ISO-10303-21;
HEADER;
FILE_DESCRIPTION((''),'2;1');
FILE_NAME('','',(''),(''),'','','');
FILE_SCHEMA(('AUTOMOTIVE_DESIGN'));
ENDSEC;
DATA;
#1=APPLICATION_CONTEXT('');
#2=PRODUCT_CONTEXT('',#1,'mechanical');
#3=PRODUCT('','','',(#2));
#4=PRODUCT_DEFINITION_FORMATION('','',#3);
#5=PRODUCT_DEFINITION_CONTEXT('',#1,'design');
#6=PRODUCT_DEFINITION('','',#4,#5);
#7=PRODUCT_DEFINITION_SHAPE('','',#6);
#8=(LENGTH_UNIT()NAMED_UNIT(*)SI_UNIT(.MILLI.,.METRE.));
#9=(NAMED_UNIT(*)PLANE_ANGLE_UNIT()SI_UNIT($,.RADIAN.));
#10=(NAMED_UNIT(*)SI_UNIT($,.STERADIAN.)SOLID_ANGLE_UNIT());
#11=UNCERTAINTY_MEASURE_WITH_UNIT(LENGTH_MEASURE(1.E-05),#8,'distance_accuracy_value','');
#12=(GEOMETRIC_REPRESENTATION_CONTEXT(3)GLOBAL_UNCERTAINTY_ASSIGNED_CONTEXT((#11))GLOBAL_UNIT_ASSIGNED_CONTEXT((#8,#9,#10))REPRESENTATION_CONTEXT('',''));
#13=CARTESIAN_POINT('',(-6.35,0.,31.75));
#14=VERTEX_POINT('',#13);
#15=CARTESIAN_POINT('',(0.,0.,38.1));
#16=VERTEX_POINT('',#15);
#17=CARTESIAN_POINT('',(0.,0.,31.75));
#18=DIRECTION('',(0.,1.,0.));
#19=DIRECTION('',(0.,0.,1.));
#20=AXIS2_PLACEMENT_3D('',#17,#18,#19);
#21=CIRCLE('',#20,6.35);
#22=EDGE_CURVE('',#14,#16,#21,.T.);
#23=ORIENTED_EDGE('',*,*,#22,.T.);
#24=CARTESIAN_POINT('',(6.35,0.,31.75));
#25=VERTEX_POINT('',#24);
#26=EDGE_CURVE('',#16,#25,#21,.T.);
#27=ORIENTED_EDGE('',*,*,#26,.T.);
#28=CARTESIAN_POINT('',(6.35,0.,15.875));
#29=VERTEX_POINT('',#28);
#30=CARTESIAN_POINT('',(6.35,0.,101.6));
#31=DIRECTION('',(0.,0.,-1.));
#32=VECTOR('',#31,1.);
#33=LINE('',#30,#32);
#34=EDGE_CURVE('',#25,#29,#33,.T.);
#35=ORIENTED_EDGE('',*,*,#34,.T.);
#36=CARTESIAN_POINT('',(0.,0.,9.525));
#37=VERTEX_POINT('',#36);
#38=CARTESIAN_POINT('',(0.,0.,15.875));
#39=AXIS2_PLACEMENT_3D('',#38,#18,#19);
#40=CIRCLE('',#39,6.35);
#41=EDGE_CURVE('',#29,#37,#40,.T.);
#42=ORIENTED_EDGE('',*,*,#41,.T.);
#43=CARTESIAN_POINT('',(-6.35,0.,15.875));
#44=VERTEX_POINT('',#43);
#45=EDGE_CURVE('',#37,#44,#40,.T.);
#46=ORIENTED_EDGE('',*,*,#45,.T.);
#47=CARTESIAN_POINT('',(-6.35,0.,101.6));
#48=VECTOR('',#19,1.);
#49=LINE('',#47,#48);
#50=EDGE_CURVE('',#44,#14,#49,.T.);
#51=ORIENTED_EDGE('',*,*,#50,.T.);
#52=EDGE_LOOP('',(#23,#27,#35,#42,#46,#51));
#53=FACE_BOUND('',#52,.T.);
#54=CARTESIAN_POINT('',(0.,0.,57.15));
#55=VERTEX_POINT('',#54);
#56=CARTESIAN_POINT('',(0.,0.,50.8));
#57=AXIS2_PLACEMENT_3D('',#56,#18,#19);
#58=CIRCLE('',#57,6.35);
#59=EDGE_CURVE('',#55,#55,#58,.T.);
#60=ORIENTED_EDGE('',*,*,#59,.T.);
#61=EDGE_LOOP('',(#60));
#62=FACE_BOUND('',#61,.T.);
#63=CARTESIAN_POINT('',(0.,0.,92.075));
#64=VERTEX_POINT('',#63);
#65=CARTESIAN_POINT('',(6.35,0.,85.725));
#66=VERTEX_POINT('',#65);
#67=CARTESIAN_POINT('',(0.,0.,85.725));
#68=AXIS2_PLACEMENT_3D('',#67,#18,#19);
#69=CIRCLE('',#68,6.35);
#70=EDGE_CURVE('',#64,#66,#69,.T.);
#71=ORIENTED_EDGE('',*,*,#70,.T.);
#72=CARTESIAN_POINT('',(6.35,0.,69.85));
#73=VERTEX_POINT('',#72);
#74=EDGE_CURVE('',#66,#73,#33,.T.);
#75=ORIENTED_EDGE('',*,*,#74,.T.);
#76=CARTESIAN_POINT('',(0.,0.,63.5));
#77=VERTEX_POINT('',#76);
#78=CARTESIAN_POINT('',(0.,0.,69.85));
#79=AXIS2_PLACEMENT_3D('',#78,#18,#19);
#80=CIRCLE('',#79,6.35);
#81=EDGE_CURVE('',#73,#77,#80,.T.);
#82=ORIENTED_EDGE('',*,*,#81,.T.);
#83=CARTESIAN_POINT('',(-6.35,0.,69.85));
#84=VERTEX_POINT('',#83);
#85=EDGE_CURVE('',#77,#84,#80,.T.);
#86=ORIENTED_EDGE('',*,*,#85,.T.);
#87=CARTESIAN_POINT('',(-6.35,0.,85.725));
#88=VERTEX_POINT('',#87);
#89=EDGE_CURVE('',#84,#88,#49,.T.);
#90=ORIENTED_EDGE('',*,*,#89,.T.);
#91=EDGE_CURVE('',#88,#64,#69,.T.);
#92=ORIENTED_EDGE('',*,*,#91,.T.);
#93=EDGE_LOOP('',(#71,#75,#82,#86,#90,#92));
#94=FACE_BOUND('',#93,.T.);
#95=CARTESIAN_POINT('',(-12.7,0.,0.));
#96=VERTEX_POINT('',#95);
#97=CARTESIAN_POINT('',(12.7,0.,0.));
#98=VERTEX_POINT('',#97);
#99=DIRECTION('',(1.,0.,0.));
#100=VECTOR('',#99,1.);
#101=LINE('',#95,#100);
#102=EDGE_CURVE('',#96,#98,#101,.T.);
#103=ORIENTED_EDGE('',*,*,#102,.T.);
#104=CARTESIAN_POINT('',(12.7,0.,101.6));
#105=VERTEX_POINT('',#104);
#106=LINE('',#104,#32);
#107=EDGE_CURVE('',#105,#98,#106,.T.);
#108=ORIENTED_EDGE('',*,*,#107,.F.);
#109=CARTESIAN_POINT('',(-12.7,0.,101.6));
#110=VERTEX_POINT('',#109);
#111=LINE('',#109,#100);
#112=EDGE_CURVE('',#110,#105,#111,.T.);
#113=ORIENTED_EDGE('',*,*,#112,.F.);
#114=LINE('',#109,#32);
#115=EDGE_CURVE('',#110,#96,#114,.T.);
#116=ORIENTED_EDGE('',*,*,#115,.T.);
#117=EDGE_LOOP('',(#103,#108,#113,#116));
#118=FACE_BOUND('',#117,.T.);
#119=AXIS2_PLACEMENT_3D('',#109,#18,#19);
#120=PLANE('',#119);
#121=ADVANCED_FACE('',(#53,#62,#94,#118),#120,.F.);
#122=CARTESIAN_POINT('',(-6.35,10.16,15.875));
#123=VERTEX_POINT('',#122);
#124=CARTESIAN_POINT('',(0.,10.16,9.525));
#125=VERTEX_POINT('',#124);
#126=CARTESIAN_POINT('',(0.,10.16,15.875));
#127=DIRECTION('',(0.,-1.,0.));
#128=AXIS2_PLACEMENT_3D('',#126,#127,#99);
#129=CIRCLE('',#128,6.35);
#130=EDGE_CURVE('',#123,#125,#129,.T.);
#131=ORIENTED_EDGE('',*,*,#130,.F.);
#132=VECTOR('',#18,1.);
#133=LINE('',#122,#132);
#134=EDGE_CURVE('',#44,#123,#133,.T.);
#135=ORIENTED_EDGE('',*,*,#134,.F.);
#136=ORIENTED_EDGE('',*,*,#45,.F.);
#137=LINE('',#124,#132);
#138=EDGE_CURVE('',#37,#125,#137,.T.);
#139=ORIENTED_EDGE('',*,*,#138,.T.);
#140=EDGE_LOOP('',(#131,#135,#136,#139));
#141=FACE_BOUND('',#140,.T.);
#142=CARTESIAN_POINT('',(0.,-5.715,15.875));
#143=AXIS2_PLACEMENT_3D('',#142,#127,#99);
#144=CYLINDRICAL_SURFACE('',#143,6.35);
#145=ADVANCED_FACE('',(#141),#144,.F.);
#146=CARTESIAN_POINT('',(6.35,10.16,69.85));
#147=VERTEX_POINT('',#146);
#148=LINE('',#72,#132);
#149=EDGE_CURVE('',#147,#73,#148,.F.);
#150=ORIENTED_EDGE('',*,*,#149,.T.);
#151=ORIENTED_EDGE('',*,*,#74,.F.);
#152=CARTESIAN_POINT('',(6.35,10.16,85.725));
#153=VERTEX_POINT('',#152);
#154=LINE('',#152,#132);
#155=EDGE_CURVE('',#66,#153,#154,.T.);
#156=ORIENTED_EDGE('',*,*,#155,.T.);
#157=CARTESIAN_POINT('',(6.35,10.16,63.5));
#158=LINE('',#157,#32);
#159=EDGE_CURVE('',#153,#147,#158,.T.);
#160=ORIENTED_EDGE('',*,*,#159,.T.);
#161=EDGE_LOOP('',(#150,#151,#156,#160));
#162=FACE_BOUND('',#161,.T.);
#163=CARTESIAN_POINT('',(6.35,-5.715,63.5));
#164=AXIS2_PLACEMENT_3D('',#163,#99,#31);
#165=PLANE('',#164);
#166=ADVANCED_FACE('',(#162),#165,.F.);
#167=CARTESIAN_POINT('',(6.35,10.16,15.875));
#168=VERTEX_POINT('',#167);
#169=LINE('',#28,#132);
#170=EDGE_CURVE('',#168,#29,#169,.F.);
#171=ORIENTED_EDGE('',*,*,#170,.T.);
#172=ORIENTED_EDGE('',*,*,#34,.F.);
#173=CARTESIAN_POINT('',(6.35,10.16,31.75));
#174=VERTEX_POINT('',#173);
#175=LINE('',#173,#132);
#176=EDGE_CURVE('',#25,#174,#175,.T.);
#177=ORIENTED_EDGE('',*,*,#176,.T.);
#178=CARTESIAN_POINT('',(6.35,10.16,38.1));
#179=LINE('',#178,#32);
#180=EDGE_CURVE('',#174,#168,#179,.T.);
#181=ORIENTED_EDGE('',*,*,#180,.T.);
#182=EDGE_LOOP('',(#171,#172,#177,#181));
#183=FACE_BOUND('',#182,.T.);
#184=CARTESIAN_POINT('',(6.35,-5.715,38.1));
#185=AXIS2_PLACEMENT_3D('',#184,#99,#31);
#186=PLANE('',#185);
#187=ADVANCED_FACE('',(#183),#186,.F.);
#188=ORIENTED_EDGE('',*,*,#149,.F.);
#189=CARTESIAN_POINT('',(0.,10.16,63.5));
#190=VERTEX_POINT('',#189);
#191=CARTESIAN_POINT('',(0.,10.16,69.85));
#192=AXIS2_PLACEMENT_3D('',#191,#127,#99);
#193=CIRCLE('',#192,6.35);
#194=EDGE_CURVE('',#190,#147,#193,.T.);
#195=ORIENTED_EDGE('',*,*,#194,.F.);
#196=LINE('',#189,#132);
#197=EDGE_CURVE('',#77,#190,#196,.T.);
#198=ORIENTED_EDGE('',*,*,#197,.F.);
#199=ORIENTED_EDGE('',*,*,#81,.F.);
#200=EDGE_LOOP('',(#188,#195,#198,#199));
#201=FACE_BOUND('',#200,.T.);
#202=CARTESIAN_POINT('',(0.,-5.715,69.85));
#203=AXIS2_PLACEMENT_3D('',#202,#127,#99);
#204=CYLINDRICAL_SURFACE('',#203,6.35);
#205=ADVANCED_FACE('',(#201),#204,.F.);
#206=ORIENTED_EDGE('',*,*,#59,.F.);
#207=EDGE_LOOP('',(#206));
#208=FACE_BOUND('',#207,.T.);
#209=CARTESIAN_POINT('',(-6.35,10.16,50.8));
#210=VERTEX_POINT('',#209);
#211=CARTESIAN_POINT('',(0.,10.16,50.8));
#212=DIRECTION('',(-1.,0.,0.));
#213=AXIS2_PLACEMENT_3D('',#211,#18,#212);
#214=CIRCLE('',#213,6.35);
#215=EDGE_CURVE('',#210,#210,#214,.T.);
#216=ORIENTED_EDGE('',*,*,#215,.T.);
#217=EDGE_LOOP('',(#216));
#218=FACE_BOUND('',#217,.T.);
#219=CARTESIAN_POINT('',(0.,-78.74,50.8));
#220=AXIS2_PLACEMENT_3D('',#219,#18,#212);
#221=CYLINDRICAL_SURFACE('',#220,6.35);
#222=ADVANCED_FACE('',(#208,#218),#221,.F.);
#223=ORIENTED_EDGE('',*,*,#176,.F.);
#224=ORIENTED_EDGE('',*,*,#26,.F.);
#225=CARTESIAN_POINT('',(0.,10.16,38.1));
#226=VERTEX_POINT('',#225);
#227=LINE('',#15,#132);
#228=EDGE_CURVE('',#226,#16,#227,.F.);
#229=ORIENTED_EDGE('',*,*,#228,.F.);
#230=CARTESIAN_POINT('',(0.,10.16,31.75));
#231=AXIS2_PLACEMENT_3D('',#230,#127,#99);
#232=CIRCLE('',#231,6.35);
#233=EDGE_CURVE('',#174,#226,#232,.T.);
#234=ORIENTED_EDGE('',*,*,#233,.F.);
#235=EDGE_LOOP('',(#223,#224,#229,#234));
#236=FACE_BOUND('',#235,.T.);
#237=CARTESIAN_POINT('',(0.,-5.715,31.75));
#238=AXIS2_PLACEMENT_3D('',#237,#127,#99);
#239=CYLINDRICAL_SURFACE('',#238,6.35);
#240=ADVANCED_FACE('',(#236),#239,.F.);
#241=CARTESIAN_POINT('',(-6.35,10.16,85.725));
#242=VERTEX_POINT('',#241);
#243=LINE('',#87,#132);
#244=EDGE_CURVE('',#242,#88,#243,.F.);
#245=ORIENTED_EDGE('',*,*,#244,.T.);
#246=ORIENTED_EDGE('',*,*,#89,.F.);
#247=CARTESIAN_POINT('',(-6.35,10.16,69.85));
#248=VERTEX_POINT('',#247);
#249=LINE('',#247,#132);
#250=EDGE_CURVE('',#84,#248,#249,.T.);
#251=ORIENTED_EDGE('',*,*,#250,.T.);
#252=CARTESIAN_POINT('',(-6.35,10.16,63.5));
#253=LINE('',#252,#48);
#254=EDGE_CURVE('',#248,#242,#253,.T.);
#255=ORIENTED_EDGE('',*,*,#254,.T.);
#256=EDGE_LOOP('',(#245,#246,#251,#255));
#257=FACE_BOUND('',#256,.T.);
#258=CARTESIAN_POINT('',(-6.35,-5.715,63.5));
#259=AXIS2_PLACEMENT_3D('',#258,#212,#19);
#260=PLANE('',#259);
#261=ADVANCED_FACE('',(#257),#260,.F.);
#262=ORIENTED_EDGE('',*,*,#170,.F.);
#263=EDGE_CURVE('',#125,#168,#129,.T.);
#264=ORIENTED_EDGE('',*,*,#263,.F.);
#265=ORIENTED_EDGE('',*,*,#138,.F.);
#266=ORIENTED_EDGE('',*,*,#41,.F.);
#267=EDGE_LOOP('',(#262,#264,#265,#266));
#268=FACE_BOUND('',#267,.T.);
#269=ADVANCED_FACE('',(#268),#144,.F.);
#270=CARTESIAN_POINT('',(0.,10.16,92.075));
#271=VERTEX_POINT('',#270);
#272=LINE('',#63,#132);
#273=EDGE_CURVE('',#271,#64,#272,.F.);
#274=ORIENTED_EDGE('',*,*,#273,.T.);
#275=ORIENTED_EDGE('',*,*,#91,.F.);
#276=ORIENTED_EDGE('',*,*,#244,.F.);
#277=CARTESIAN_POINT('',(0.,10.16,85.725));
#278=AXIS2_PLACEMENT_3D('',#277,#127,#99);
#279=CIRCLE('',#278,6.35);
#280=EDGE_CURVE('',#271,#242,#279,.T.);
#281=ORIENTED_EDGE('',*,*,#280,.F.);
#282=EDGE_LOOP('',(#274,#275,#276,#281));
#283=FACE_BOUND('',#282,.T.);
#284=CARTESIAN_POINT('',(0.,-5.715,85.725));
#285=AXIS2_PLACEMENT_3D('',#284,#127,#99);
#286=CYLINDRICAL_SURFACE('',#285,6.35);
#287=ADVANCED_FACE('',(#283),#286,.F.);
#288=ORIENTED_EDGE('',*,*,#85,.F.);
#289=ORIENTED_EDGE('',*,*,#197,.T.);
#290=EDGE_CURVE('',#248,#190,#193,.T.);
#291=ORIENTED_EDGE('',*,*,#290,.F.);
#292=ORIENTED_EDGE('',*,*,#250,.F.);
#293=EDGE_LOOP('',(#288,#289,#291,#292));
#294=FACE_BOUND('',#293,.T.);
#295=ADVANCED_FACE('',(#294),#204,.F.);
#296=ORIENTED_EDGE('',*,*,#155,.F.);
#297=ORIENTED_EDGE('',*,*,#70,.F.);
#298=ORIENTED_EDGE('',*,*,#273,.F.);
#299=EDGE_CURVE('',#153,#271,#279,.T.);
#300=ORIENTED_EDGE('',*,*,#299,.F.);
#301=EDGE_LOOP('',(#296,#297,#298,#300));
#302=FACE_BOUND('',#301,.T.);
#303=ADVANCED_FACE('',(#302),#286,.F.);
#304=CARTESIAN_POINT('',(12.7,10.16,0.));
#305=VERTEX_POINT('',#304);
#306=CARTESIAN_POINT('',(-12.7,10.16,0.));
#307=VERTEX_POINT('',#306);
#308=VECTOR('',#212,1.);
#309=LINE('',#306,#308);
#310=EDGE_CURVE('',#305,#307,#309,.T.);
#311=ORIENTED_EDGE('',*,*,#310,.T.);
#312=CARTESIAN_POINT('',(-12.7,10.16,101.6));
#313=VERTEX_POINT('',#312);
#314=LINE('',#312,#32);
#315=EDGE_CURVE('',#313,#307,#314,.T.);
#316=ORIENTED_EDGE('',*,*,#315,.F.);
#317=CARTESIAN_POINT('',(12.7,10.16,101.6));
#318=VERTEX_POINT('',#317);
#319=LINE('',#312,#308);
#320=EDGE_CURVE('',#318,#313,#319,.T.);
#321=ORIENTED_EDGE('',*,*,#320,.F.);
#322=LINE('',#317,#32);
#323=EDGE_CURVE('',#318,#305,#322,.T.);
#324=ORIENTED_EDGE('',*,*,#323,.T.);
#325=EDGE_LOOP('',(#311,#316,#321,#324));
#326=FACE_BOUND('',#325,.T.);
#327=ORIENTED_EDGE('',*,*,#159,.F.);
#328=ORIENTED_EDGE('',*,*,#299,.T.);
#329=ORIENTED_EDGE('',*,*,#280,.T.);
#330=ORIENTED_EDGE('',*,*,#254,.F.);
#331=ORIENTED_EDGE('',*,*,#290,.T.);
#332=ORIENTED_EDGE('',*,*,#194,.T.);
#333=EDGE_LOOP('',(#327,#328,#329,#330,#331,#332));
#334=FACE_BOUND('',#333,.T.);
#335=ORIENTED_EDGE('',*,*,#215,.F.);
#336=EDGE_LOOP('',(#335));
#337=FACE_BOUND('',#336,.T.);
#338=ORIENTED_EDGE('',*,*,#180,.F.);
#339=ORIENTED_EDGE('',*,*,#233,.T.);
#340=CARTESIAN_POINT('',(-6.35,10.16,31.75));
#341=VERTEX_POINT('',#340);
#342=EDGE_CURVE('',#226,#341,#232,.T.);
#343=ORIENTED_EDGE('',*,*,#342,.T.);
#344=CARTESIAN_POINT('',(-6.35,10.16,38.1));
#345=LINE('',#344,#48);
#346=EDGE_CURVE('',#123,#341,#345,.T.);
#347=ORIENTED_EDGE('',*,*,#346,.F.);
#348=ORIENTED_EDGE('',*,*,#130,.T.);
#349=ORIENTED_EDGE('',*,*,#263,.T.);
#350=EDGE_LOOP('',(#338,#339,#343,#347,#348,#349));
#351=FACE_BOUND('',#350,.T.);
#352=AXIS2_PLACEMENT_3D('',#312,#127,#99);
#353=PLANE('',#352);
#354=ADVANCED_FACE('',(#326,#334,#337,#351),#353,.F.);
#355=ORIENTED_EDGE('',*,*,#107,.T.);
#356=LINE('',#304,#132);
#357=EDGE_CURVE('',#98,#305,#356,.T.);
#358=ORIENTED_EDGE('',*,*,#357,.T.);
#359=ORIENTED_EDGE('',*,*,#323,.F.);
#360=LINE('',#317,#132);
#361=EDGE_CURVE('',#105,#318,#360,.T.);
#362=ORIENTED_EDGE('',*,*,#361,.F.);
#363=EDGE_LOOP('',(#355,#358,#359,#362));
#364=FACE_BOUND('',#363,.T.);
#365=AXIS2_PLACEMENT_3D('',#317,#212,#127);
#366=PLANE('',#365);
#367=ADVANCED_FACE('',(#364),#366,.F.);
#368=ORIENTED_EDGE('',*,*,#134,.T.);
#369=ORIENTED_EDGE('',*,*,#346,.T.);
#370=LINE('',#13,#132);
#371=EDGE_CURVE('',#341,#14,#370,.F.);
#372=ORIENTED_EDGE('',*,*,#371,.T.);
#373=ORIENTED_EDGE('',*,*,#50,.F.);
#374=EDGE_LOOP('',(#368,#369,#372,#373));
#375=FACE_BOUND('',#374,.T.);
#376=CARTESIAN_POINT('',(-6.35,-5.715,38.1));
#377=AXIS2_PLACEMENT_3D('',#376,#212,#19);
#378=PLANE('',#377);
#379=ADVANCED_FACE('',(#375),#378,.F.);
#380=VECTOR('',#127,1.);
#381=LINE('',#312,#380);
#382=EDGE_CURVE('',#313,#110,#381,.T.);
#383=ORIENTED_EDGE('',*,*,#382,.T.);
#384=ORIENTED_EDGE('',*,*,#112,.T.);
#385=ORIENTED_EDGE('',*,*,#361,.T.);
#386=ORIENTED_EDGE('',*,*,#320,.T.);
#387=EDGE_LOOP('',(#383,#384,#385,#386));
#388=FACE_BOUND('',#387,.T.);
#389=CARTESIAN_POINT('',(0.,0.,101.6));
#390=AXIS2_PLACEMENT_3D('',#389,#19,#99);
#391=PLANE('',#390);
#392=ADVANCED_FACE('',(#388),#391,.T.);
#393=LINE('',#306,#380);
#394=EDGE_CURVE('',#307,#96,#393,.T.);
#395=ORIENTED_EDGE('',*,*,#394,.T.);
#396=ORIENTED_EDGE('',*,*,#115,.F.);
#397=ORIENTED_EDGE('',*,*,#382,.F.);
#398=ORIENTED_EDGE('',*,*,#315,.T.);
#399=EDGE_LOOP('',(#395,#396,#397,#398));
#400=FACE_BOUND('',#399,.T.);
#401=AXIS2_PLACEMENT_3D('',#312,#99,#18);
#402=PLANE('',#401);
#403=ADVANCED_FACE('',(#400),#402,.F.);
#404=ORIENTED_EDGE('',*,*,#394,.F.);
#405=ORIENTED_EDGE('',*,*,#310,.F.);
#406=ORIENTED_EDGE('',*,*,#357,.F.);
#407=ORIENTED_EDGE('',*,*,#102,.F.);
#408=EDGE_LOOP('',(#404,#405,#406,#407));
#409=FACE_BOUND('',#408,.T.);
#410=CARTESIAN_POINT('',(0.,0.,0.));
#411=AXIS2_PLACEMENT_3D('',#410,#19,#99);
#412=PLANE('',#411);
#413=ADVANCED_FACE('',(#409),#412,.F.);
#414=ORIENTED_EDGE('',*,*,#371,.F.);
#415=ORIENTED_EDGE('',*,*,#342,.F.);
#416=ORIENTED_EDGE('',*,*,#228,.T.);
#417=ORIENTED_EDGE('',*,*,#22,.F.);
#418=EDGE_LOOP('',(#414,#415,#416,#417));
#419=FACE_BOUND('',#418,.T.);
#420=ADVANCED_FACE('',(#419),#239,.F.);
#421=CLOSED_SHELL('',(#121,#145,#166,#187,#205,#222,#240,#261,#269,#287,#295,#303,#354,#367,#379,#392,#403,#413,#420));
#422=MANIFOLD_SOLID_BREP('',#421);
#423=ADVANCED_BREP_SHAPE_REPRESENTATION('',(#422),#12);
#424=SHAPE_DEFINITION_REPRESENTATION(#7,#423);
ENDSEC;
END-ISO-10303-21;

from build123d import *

# Parameters (mm, degrees)
SKETCH1_W           = 25.4
SKETCH1_H           = 10.16
BOSS_EXTRUDE1_DEPTH = 101.6
SKETCH2_R           = 6.35
CUT_EXTRUDE1_DEPTH  = 88.9
SKETCH5_W           = 12.7
SKETCH5_H           = 28.575
CUT_EXTRUDE3_DEPTH  = 15.875
FILLET1_R           = 6.35


with BuildPart() as part:
    # Sketch1 → Boss-Extrude1 (new body)
    with BuildSketch(Plane.XY):
        with Locations((0, 5.08)):
            Rectangle(SKETCH1_W, SKETCH1_H)
    extrude(amount=BOSS_EXTRUDE1_DEPTH)

    # Sketch2 → Cut-Extrude1 (cut)
    with BuildSketch(Plane(origin=(0, 10.16, 0), x_dir=(1, 0, 0), z_dir=(0, 1, 0))):
        with Locations(Location((0, -50.8, 0), (0, 0, 180))):
            Circle(SKETCH2_R)
    extrude(amount=-CUT_EXTRUDE1_DEPTH, mode=Mode.SUBTRACT)

    # Sketch5 → Cut-Extrude3 (cut)
    with BuildSketch(Plane(origin=(0, 10.16, 0), x_dir=(1, 0, 0), z_dir=(0, 1, 0))):
        with Locations((0, -77.7875)):
            Rectangle(SKETCH5_W, SKETCH5_H)
        with Locations((0, -23.8125)):
            Rectangle(SKETCH5_W, SKETCH5_H)
    extrude(amount=-CUT_EXTRUDE3_DEPTH, mode=Mode.SUBTRACT)

    # Fillet1
    fillet1_edges = [part.edges().sort_by_distance(p)[0] for p in [
        (-6.35, 5.08, 92.075),
        (-6.35, 5.08, 38.1),
        (-6.35, 5.08, 63.5),
        (-6.35, 5.08, 9.525),
        (6.35, 5.08, 9.525),
        (6.35, 5.08, 63.5),
        (6.35, 5.08, 92.075),
        (6.35, 5.08, 38.1),
    ]]
    fillet(fillet1_edges, radius=FILLET1_R - 0.0001)  # a hair under: the kernel refuses the full size


solid = part.part
